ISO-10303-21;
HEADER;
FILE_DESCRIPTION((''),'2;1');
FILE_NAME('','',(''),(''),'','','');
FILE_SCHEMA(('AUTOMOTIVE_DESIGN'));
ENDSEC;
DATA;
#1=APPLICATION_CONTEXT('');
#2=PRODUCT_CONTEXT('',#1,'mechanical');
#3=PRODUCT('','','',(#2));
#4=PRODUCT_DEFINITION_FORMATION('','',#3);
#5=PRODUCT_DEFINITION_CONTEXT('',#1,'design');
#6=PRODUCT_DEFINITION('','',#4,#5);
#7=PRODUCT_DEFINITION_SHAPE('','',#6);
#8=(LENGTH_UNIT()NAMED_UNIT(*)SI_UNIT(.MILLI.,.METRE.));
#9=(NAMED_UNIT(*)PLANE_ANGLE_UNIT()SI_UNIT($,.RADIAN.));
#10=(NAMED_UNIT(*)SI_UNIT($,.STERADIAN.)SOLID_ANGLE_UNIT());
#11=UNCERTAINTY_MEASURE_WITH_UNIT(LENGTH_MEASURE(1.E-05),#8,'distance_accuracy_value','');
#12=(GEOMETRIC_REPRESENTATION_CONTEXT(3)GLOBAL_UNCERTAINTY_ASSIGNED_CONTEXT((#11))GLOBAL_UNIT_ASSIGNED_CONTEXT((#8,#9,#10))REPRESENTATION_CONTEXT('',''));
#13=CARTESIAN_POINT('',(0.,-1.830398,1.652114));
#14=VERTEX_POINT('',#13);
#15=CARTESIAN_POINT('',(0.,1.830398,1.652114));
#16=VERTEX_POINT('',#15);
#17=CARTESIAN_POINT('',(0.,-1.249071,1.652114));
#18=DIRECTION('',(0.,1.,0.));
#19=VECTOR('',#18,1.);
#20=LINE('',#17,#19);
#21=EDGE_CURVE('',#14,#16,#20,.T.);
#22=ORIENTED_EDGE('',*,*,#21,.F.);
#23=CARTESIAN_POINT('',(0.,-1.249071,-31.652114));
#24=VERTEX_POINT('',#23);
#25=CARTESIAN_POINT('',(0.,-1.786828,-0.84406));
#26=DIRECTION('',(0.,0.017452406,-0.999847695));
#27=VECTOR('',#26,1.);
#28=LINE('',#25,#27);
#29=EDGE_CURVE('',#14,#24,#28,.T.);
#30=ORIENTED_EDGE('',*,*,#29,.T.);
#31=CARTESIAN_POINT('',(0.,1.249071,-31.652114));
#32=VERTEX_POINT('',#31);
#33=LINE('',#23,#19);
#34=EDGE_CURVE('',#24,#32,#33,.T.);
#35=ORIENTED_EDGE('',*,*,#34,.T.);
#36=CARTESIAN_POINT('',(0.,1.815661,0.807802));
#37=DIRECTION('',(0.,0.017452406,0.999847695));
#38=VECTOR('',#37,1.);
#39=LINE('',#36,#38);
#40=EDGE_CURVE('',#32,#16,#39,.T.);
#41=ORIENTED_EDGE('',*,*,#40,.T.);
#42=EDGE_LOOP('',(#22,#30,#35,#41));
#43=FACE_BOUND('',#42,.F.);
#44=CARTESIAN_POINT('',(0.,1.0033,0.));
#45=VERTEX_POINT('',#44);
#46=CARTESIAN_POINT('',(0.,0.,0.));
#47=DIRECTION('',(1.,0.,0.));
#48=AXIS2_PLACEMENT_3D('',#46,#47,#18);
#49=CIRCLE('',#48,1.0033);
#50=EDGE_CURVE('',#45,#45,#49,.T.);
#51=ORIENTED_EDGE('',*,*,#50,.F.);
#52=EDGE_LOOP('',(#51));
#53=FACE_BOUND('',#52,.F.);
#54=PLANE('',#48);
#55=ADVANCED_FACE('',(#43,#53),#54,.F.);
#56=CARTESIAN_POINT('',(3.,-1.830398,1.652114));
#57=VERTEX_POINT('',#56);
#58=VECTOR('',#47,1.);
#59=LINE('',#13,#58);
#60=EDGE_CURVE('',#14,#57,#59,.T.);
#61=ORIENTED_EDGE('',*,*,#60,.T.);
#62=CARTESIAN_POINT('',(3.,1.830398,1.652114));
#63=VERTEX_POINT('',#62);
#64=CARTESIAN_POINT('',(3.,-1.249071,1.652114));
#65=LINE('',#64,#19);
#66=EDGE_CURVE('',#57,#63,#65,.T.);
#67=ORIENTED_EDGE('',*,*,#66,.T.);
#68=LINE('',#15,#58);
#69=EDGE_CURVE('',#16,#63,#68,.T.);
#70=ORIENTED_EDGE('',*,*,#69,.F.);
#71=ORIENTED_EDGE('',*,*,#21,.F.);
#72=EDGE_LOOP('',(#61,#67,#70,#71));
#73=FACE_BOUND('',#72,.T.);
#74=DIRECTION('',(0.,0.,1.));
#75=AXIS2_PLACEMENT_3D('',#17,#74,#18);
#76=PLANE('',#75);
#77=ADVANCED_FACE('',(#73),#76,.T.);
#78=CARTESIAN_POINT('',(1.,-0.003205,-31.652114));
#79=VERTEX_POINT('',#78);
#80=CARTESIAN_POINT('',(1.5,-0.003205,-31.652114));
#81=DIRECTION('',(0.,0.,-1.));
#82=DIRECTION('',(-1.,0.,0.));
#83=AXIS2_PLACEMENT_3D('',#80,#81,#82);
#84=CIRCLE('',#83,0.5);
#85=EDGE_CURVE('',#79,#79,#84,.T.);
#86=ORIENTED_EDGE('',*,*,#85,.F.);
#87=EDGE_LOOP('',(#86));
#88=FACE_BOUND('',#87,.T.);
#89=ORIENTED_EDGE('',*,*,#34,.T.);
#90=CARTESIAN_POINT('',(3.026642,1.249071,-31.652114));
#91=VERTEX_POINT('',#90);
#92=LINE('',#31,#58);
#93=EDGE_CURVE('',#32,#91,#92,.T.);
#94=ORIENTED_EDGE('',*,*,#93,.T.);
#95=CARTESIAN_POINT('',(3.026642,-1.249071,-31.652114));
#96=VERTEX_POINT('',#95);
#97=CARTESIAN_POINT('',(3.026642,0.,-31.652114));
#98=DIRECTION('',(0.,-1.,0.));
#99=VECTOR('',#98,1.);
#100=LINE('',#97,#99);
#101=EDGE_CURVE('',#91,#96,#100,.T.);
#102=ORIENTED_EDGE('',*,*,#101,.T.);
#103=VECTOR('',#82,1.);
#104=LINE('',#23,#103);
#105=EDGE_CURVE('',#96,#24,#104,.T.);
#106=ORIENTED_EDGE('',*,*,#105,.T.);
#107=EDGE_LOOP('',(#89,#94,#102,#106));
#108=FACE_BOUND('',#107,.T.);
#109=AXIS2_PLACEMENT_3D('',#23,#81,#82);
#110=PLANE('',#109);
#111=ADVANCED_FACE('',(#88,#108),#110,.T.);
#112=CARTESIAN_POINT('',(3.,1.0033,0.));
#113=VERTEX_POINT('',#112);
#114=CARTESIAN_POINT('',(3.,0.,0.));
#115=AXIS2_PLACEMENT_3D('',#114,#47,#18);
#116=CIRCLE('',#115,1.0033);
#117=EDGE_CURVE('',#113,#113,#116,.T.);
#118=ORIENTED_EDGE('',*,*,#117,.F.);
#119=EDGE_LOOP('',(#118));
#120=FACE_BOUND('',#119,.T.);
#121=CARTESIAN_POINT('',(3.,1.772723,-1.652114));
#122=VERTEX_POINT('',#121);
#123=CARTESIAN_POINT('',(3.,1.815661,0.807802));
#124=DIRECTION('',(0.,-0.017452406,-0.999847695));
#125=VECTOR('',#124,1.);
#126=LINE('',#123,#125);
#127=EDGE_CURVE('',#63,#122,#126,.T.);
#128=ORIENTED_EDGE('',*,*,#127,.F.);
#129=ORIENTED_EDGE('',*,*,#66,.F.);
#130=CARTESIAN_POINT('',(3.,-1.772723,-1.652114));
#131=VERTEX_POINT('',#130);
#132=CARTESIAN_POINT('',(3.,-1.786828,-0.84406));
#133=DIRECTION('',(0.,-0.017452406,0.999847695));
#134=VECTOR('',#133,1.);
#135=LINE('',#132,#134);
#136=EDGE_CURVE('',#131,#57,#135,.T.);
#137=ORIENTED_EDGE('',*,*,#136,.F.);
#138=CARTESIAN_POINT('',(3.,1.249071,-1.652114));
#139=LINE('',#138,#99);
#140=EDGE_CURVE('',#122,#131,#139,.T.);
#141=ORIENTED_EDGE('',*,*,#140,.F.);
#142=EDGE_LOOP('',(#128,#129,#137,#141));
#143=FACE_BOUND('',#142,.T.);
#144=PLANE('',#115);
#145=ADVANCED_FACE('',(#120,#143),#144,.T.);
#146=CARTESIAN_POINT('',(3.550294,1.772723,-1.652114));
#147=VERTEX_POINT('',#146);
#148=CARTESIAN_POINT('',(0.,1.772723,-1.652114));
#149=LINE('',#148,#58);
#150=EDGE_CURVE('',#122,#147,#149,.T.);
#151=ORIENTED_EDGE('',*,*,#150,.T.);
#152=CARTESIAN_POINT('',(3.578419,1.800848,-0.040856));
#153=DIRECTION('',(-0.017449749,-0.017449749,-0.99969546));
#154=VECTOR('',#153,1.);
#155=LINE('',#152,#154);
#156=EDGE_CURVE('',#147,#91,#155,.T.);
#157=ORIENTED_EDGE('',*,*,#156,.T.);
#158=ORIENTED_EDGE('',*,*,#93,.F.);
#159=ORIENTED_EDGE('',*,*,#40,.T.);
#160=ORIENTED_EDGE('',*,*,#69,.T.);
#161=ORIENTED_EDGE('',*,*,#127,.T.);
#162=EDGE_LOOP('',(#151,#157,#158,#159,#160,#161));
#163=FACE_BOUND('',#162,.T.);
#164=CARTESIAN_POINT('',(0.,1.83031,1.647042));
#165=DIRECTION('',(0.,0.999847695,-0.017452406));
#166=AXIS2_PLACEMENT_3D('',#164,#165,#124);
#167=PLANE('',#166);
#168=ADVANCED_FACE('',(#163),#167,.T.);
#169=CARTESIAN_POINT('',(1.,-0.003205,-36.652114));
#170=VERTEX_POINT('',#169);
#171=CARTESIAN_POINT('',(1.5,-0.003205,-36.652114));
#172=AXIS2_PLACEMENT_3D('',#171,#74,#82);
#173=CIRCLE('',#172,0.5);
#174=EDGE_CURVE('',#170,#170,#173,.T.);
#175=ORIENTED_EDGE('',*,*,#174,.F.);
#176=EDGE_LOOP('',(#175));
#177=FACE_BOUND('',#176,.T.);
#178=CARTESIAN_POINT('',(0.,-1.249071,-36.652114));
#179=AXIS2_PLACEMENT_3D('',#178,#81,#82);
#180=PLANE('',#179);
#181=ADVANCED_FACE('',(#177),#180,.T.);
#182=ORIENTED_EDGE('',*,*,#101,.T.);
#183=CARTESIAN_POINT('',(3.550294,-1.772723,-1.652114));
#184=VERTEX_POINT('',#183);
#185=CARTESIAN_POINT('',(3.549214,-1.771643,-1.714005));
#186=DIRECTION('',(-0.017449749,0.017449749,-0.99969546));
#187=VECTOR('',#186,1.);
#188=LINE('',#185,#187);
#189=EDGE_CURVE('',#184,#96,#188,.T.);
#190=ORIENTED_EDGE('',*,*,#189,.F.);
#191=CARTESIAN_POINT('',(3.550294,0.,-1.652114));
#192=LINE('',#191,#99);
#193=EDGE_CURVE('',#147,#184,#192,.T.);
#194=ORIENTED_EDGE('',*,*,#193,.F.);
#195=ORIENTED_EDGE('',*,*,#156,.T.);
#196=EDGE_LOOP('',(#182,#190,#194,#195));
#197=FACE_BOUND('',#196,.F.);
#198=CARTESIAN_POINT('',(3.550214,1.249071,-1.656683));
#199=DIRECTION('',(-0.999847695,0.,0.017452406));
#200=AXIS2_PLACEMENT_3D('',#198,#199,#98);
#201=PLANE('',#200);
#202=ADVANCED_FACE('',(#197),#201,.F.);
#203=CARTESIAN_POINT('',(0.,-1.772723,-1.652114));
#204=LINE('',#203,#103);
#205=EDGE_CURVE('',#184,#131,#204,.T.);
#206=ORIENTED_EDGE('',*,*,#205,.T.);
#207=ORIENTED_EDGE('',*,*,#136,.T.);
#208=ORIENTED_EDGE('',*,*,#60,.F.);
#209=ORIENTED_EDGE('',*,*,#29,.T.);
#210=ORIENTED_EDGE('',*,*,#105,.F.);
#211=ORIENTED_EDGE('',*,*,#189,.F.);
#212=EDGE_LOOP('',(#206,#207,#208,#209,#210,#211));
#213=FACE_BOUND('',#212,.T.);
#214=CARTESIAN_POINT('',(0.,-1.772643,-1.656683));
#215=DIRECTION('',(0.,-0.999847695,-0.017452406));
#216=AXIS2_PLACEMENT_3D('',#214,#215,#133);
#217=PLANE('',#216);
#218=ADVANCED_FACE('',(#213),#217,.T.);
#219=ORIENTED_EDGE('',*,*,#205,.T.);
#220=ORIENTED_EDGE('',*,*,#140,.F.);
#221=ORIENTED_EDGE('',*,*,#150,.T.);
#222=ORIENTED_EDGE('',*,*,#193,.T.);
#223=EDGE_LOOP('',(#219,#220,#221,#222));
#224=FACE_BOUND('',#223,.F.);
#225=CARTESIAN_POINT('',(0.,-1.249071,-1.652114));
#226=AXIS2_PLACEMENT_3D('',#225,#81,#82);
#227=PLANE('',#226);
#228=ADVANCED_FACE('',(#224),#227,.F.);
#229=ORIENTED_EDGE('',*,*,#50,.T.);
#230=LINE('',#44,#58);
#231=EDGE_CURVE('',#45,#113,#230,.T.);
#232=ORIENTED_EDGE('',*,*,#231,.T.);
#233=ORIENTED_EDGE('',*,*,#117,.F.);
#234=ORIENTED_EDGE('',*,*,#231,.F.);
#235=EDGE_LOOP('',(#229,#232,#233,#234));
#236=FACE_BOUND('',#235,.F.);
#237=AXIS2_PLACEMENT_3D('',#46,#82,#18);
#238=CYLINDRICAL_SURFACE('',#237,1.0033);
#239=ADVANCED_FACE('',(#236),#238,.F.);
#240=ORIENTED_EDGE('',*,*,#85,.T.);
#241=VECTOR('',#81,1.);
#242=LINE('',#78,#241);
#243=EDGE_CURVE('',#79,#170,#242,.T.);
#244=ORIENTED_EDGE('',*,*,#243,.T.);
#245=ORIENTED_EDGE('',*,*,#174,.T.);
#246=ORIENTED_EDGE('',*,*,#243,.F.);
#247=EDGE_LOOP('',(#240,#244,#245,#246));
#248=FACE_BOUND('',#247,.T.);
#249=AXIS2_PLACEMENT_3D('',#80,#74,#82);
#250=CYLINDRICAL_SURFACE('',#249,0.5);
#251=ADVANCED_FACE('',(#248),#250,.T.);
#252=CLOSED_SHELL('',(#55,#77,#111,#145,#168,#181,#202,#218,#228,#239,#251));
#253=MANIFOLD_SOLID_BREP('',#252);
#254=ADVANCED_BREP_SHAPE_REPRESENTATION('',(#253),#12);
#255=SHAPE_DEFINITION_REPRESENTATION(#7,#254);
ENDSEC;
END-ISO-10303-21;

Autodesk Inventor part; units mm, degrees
ref_plane "YZ Plane" through (0, 0, 0) normal (1, 0, 0) x (0, 1, 0)
ref_plane "XZ Plane" through (0, 0, 0) normal (0, 1, 0) x (-1, 0, 0)
ref_plane "XY Plane" through (0, 0, 0) normal (0, 0, 1) x (1, 0, 0)
sketch "Sketch1" plane through (0, 0, 0) normal (1, 0, 0) x (0, 1, 0)
  circle A0 centre (0, 0) radius 1.0033
  line L0 (-1.249071, 1.652114) -> (1.249071, 1.652114)
  line L1 (1.249071, 1.652114) -> (1.249071, -1.652114)
  line L2 (1.249071, -1.652114) -> (-1.249071, -1.652114)
  line L3 (-1.249071, -1.652114) -> (-1.249071, 1.652114)
  line L4 (-1.249071, 1.652114) -> (1.249071, -1.652114) construction
  line L5 (1.249071, 1.652114) -> (-1.249071, -1.652114) construction
  dimension "d0" = 2.0066
  dimension "d1" = 37.0909
  dimension "d2" = 2.49814
extrude "Extrusion1" add sketch "Sketch1" along normal blind 3
sketch "Sketch2" plane through (0, -1.249071, -1.652114) normal (0, 0, -1) x (-1, 0, 0)
  line L0 (0, 0) -> (0, 2.498142)
  line L1 (-3.026642, 0) -> (0, 0)
  line L2 (0, 0) -> (0, 2.498142)
  line L3 (0, 2.498142) -> (-3.026642, 2.498142)
  line L4 (-3.026642, 2.498142) -> (-3.026642, 0)
  line L5 (-3.026642, 0) -> (0, 2.498142) construction
  line L6 (0, 0) -> (-3.026642, 2.498142) construction
  point P0 (0, 1.249071)
  point P1 (-1.513321, 1.249071)
  dimension "d5" = 50.4643
  dimension "d6" = 3.02664
extrude "Extrusion2" add sketch "Sketch2" along normal blind 30
draft "FaceDraft1" angle 1 pull direction (0, 0, -1) faces at (1, -1.249071, -10.550705) (3.026642, 0.416357, -21.652114) (1, 1.249071, -10.550705) fixed edges at (1.513321, -1.249071, -31.652114) (3.026642, 0, -31.652114) (1.513321, 1.249071, -31.652114)
sketch "Sketch3" plane through (0, -1.249071, -31.652114) normal (0, 0, -1) x (-1, 0, 0)
  line L0 (0, 2.491731) -> (-3, -0.000251)
  line L1 (-3, 3.079469) -> (-3, -0.581327)
  line L2 (-3.026642, 0) -> (0, 0)
  line L3 (-3, 2.491731) -> (0, 0)
  circle A0 centre (-1.5, 1.245866) radius 0.5
  point P0 (0, 1.249071)
  dimension "d10" = 1
extrude "Extrusion3" add sketch "Sketch3" along normal blind 5 contours A0 L3 L0 | L0 L3 A0 | L3 A0 L0 | L0 A0 L3
properties part number "bout tournant"
